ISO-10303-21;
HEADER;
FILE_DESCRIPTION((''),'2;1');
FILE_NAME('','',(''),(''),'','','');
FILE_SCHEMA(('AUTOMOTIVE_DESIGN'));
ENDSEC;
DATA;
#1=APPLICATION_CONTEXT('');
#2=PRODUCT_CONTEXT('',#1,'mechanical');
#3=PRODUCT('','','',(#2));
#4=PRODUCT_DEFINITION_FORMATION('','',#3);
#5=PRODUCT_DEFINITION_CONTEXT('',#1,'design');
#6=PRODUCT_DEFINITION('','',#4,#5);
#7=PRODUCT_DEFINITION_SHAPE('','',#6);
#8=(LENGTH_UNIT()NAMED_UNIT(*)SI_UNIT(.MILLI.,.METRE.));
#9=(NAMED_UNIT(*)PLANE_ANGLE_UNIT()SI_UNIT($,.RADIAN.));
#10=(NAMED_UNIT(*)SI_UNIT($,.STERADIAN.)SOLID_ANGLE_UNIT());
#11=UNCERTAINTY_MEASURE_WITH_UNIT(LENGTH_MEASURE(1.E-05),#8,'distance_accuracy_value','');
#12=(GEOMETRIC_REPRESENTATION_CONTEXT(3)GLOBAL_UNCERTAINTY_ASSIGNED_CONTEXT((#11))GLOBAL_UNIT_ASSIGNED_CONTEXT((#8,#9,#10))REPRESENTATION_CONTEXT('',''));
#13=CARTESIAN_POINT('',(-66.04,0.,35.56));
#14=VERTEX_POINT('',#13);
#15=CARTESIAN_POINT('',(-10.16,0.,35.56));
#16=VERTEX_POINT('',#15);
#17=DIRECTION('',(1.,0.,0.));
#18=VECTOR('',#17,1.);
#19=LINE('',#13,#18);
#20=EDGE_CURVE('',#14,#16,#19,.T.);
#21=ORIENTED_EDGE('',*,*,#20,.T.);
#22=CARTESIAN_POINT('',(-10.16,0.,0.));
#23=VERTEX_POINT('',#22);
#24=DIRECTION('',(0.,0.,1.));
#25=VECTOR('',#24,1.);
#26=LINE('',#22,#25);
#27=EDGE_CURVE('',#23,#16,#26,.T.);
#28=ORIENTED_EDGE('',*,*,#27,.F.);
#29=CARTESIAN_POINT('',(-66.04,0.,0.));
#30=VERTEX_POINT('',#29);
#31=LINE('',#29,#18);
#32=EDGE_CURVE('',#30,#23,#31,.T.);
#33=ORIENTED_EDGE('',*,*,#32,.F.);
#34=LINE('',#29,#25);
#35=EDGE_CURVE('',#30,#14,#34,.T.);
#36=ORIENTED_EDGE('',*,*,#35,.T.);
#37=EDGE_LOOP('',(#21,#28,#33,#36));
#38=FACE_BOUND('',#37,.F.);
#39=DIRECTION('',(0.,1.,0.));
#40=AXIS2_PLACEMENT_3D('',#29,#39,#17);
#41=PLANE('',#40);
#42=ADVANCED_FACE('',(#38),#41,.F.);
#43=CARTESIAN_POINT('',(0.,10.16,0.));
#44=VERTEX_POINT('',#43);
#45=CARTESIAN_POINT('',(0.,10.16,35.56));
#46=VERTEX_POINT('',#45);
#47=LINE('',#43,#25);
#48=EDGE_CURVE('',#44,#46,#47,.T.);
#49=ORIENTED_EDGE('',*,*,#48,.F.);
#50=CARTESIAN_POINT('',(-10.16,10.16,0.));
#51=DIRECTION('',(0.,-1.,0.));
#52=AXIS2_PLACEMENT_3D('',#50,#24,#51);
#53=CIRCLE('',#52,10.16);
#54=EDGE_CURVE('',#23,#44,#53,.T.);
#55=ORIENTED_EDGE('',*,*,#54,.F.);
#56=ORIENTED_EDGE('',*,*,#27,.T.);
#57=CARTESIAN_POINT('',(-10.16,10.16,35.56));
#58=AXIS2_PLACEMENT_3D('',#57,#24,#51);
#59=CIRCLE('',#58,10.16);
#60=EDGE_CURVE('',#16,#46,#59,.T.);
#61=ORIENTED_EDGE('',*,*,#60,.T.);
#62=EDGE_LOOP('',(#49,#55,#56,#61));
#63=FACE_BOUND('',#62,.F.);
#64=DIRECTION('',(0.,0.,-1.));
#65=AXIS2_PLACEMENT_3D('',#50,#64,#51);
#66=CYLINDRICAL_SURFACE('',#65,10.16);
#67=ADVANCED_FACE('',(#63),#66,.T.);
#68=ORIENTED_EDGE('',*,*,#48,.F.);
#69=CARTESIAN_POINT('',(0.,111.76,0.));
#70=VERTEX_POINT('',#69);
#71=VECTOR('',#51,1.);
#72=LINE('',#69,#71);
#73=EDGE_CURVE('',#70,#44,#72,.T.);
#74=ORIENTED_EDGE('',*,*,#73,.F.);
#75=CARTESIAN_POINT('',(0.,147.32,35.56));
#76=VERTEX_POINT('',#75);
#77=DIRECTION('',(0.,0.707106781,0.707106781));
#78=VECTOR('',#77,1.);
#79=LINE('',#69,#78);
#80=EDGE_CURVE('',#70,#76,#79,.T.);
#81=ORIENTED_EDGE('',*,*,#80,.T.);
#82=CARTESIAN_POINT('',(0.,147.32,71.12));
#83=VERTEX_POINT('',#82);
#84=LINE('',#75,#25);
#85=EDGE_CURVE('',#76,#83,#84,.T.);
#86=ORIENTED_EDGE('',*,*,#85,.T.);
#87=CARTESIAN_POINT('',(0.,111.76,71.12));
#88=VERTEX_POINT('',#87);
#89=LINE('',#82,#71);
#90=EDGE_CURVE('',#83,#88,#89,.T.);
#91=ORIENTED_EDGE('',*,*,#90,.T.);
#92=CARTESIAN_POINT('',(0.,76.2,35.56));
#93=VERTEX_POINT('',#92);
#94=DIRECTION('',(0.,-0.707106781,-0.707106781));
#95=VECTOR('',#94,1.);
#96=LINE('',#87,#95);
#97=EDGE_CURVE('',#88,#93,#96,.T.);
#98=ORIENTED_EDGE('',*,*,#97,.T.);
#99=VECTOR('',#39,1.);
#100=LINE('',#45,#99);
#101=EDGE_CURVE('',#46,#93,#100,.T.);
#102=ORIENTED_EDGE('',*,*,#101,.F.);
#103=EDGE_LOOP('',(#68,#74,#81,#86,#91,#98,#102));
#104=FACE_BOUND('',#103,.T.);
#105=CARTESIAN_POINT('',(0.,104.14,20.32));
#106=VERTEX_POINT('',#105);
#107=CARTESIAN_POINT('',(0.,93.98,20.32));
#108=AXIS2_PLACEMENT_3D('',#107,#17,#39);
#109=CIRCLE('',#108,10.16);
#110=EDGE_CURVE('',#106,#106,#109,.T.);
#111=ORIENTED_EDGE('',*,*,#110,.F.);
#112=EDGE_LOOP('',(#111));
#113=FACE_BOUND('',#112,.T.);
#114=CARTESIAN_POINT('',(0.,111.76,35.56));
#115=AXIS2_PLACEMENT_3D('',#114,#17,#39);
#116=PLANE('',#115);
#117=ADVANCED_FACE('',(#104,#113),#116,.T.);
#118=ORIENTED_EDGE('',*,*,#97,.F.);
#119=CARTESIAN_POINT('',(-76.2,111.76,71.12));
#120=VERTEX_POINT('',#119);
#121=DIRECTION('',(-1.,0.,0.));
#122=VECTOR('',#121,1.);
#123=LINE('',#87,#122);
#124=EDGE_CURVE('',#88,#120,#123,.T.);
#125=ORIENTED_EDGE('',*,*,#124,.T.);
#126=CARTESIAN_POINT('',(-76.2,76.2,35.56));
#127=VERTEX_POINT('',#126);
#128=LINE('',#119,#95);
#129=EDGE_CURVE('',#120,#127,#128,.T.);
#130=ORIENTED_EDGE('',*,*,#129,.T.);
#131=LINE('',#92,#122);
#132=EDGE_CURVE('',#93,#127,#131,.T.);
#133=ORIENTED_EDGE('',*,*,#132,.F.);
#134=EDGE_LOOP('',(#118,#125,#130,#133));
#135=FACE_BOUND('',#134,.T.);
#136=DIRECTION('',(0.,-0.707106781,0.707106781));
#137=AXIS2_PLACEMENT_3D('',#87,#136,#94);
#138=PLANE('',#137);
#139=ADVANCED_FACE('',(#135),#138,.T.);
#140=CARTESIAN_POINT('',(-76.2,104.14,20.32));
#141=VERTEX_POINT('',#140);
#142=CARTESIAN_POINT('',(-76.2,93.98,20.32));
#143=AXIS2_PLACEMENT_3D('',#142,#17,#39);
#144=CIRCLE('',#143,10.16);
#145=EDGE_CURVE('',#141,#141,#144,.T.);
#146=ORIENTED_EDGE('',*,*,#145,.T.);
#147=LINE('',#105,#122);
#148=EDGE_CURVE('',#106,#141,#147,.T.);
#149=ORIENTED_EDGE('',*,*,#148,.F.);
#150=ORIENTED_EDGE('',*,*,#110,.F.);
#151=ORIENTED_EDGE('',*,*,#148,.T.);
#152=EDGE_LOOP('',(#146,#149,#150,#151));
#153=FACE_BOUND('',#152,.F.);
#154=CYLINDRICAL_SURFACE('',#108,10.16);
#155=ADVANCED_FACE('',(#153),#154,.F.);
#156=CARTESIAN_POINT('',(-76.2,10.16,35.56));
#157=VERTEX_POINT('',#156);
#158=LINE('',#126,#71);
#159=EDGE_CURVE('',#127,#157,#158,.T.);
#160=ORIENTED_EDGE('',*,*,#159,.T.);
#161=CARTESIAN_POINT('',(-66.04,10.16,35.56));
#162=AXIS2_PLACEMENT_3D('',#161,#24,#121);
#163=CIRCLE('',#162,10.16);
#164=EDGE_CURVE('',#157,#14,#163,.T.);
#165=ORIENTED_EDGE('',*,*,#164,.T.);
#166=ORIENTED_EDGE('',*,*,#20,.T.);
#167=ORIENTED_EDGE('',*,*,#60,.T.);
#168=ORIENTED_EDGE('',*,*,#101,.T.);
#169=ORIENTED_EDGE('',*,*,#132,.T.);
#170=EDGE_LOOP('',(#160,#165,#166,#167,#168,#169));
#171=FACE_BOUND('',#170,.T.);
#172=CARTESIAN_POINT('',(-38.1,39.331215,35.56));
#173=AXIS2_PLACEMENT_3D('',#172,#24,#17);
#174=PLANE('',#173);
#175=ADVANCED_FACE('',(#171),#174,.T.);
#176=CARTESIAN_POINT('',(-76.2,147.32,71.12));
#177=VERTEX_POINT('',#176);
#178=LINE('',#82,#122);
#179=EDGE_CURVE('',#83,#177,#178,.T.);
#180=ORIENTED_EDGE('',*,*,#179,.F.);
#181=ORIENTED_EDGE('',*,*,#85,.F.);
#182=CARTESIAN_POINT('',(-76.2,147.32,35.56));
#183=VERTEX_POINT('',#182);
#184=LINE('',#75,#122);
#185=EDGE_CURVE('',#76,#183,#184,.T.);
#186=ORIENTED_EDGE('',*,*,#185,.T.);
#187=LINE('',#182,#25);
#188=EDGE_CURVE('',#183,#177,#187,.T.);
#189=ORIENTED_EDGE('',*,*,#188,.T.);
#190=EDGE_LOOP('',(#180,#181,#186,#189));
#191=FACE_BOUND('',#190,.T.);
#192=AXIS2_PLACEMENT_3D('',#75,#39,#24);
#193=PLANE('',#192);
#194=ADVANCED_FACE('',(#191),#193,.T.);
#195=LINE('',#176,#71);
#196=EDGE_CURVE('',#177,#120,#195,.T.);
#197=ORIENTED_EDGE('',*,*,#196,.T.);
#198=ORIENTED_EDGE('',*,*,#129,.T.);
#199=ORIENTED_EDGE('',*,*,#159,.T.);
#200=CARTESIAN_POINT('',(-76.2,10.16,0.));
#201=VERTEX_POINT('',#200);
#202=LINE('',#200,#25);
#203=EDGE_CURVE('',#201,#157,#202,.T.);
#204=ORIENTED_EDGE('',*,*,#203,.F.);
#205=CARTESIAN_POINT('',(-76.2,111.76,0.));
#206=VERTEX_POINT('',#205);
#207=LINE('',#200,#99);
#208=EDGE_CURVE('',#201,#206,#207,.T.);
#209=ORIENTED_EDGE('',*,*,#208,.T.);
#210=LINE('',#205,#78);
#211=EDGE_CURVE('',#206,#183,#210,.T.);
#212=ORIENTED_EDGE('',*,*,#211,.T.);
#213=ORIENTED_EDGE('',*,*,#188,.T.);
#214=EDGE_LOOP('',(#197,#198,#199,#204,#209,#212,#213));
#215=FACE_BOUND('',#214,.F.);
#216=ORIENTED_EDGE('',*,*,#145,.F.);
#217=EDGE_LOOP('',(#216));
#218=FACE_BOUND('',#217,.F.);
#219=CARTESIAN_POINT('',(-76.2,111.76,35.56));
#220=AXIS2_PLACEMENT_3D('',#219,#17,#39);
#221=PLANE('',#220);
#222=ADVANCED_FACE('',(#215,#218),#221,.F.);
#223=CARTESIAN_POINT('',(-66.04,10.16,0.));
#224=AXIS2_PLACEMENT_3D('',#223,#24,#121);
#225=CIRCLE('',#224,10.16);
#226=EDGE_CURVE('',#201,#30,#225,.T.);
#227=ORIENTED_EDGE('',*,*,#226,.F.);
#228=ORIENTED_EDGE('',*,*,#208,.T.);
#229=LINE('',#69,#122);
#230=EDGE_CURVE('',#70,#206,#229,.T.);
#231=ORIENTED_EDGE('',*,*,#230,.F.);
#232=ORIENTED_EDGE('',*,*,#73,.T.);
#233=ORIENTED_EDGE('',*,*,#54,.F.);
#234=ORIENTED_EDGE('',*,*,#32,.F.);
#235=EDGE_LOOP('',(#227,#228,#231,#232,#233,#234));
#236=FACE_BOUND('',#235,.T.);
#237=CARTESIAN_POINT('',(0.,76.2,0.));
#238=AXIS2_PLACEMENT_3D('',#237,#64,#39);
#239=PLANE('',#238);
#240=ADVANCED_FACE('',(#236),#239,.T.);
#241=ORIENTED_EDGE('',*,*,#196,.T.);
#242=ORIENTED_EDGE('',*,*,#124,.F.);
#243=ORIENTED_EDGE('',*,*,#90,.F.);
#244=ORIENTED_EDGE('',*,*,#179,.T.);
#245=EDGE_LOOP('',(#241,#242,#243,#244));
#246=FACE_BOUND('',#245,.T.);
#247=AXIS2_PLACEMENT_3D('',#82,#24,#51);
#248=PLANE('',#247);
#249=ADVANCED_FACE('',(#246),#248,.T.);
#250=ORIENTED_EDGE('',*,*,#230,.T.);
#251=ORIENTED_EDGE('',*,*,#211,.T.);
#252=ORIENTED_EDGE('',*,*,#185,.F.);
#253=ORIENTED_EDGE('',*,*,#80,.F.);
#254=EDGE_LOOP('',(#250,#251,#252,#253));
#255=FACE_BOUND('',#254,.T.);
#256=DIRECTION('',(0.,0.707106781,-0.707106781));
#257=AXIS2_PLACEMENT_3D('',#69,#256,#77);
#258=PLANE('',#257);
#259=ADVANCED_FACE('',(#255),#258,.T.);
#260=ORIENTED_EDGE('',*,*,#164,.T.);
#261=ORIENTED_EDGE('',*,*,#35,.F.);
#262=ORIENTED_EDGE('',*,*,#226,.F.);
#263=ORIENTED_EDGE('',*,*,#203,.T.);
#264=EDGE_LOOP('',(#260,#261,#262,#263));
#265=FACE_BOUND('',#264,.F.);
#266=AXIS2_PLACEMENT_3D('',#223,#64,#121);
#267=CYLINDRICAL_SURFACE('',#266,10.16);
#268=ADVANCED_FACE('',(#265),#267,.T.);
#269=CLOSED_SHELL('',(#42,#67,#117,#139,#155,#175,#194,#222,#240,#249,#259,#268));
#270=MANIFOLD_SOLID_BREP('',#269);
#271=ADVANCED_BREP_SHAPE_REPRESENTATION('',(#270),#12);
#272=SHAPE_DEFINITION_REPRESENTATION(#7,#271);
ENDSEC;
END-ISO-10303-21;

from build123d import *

# Parameters (mm, degrees)
F2_DEPTH = 35.56
F0_R     = 10.16
F3_DEPTH = 76.2


# Not quite as in the source:
# - a feature names something its author has since deleted; it is built from what else it names


with BuildPart() as f2:
    # F1 (on Top) → F2 (new body)
    with BuildSketch(Plane.XY):
        with BuildLine():
            Line((0, 76.2), (-76.2, 76.2))
            Line((-76.2, 76.2), (-76.2, 10.16))
            ThreePointArc((-76.2, 10.16), (-73.2242048969, 2.9757951031), (-66.04, 0))
            Line((-66.04, 0), (-10.16, 0))
            ThreePointArc((-10.16, 0), (-2.9757951031, 2.9757951031), (0, 10.16))
            Line((0, 10.16), (0, 76.2))
        make_face()
    extrude(amount=F2_DEPTH)

    # F0 (on Right) → F3 (join)
    with BuildSketch(Plane.YZ):
        Polygon((76.2, 0), (111.76, 0), (147.32, 35.56), (147.32, 71.12), (111.76, 71.12), (76.2, 35.56), align=None)
        with Locations((93.98, 20.32)):
            Circle(F0_R, mode=Mode.SUBTRACT)
    extrude(amount=-F3_DEPTH)


solid = f2.part
